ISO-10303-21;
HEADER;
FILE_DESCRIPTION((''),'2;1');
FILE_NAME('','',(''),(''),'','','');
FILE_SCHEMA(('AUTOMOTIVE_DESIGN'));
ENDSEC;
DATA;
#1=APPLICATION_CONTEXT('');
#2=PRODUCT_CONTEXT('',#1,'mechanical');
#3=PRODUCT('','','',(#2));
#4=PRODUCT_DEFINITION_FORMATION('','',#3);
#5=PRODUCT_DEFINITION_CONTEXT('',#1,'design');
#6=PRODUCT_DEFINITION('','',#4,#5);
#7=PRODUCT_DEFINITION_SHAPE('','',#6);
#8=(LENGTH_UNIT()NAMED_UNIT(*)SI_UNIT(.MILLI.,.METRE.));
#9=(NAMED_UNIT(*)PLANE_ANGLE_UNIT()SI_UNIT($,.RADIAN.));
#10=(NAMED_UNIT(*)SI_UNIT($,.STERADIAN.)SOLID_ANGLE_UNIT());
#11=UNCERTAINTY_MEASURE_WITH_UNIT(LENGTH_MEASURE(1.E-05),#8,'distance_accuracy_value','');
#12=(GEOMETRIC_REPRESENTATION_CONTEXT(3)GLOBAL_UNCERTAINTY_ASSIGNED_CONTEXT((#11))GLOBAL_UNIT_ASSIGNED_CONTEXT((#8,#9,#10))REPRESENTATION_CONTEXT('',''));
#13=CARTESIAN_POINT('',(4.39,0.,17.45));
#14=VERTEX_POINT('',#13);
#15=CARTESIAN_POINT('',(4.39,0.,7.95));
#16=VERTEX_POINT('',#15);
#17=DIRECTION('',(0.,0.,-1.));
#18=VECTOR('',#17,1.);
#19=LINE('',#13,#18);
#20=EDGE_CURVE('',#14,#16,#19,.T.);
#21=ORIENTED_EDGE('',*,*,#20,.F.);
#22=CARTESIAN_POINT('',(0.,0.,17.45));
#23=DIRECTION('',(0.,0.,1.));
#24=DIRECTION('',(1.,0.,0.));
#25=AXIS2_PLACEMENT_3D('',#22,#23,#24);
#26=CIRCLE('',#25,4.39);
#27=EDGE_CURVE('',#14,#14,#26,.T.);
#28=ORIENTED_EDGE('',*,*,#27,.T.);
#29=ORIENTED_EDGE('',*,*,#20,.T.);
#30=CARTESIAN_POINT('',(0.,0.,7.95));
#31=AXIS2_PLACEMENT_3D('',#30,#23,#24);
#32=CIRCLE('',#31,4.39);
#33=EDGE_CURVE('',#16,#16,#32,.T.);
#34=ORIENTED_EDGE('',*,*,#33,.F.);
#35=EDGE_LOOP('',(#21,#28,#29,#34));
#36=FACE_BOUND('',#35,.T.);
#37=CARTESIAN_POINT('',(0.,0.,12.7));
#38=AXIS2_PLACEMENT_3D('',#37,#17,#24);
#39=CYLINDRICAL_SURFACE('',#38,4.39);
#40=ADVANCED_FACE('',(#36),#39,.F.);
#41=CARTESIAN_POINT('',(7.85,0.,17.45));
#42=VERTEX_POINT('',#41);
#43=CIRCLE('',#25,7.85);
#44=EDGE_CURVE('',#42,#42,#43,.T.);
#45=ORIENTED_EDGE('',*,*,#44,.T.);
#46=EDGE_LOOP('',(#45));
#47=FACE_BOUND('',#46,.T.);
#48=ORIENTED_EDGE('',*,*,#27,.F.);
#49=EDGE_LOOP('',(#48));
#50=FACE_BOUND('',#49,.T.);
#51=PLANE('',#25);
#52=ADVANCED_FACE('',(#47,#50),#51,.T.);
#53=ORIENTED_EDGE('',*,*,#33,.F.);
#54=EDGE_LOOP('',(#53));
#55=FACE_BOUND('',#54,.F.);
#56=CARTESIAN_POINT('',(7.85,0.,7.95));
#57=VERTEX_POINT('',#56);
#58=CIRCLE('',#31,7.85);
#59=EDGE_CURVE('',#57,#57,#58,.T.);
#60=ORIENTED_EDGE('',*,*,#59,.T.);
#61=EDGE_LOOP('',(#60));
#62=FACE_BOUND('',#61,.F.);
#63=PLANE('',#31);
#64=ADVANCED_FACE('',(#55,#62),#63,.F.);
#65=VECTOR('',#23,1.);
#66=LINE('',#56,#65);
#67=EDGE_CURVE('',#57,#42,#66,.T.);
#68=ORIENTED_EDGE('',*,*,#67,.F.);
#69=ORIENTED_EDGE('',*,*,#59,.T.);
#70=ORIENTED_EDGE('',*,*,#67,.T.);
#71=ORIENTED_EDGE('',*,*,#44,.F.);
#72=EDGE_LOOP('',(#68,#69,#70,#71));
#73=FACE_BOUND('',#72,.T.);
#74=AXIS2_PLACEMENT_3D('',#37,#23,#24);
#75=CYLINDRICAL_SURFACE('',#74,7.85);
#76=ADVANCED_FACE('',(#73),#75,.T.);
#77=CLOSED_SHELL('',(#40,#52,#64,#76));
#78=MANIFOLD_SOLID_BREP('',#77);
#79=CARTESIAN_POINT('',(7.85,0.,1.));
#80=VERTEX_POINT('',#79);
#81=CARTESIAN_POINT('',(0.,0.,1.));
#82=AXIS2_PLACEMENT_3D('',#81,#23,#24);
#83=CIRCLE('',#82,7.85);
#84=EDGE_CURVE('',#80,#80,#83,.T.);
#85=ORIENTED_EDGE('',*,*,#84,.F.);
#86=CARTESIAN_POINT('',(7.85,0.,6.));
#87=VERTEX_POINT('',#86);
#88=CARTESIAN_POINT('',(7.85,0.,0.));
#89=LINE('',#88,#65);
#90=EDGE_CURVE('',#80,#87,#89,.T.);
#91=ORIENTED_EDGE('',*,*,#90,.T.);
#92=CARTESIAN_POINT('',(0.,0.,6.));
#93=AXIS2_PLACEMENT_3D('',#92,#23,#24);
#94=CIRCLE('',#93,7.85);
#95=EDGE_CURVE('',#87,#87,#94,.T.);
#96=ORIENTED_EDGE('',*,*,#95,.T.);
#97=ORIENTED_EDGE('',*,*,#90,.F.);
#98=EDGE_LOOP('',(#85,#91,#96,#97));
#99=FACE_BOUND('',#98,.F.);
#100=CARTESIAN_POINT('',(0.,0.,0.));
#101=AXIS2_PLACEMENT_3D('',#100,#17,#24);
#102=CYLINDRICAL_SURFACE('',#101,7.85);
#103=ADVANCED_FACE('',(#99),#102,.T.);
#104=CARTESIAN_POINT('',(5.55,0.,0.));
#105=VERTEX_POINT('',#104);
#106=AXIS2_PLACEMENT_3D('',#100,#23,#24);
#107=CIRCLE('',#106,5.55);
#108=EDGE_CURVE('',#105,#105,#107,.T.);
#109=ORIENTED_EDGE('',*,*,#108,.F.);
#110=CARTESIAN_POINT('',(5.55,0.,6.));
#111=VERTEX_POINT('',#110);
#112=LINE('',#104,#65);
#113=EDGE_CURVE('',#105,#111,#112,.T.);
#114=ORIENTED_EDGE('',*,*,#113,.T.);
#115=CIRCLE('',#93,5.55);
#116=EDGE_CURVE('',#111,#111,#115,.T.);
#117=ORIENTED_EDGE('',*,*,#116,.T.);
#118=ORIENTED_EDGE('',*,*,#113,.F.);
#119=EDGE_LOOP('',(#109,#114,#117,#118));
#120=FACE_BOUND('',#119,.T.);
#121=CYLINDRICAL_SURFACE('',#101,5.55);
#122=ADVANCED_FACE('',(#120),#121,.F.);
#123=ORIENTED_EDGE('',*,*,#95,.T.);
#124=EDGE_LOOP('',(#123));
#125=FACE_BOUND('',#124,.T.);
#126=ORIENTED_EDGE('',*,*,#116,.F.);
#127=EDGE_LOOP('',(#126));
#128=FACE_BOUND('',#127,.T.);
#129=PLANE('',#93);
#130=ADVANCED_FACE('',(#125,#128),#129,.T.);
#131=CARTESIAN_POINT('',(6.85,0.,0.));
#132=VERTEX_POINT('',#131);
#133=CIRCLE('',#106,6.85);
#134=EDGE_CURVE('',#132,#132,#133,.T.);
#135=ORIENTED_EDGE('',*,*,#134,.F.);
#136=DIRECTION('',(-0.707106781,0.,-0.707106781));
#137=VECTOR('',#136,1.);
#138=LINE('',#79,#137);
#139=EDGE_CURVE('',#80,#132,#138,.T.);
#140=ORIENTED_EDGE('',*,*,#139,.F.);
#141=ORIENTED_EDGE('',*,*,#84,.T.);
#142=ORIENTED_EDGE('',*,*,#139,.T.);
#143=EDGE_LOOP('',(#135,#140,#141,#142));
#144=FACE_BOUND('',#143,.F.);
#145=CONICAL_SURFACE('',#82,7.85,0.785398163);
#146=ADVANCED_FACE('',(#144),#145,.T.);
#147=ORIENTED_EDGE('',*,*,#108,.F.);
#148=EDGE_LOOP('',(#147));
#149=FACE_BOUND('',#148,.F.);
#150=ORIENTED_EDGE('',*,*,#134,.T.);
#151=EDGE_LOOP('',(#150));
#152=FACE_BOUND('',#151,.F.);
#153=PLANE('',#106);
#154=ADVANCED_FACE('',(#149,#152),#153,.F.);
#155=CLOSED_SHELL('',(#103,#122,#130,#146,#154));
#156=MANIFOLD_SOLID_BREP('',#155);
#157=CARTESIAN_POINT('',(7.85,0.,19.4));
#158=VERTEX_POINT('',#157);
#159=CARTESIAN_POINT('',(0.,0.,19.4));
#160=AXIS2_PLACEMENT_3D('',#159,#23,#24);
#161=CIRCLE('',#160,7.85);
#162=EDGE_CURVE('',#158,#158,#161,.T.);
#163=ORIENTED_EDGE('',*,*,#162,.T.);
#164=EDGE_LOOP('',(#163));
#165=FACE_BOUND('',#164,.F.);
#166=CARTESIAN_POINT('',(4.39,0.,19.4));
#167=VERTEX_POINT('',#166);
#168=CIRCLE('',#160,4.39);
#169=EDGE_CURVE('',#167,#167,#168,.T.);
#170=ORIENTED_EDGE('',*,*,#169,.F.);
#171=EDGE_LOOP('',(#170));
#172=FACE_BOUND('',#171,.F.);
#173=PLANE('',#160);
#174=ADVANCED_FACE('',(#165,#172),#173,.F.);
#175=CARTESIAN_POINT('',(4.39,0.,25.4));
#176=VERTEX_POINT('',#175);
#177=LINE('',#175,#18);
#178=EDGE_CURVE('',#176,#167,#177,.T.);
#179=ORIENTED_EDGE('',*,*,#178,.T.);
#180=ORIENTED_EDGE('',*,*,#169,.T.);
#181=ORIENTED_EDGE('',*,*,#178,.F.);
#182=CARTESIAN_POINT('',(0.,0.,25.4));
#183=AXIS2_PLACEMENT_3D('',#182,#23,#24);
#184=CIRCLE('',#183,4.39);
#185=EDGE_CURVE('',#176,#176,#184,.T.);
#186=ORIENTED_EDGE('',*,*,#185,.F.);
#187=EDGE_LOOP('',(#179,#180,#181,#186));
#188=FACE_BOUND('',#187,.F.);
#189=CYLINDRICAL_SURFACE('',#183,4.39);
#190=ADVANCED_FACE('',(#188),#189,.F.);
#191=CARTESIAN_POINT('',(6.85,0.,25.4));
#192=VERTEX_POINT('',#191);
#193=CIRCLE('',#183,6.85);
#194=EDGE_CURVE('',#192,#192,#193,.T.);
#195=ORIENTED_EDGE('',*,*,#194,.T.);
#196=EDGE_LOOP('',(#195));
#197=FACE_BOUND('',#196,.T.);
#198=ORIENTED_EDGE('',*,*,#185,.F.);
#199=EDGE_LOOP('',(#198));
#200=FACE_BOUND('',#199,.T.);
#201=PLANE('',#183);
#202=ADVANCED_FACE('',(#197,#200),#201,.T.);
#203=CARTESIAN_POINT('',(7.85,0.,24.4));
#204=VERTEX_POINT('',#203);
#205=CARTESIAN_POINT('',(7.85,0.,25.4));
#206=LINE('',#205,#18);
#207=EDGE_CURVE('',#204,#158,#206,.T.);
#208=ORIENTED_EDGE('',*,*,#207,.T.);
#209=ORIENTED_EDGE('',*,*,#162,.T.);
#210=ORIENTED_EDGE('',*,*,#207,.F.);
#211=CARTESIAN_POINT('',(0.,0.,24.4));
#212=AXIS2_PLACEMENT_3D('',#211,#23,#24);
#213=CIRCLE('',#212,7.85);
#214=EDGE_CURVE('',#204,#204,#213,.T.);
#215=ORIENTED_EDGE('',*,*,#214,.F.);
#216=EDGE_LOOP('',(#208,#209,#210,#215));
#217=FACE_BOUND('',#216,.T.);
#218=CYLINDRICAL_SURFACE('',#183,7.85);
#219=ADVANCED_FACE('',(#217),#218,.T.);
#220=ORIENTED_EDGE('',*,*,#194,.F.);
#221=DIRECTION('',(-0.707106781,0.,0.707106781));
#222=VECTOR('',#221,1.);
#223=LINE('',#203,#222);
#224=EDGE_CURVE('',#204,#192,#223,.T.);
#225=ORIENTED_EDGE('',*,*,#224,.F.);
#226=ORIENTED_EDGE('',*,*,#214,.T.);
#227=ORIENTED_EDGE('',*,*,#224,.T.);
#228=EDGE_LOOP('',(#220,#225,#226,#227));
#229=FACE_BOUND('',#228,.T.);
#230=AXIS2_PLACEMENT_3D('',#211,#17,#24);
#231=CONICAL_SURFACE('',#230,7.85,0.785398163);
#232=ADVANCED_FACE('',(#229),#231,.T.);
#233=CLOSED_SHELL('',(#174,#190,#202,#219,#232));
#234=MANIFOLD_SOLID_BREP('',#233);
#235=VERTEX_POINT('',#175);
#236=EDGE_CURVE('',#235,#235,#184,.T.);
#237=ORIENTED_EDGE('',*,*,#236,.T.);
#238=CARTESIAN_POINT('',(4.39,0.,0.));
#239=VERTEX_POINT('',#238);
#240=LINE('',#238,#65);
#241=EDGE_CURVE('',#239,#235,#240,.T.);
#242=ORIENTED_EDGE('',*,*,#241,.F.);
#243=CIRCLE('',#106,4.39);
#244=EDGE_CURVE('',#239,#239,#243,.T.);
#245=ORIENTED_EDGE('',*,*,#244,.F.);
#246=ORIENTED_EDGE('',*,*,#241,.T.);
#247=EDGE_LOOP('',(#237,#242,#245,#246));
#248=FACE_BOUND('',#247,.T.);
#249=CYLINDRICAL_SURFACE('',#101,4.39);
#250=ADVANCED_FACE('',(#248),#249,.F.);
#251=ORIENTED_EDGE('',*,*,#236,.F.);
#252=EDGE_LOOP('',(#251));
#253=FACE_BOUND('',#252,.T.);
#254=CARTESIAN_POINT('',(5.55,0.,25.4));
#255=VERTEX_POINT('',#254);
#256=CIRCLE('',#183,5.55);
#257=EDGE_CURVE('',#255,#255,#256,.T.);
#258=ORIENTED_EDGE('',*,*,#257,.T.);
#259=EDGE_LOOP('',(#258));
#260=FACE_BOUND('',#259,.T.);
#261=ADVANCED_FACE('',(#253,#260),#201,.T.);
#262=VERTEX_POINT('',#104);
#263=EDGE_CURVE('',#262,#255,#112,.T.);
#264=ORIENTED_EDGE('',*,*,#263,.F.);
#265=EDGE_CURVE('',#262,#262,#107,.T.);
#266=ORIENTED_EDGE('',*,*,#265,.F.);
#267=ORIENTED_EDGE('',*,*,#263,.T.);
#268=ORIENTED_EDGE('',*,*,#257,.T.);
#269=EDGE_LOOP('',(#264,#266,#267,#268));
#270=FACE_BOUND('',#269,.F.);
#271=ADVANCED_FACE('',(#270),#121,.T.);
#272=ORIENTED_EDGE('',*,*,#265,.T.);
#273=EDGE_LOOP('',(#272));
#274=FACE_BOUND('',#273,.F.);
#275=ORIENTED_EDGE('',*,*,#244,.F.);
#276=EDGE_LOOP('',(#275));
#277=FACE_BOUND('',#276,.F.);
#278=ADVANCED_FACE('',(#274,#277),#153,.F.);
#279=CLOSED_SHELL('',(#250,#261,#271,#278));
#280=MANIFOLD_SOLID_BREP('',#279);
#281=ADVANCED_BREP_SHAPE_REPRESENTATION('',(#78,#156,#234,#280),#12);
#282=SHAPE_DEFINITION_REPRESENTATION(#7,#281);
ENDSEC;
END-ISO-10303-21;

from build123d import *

# Parameters (mm, degrees)
F0_R      = 7.85
F0_R_2    = 5.55
F1_DEPTH  = 6
F2_SIZE   = 1
F5_R      = 7.85
F5_R_2    = 4.39
F6_DEPTH  = 6
F7_SIZE   = 1
F0_R_3    = 4.39
F8_DEPTH  = 25.4
F10_R     = 7.85
F10_R_2   = 4.39
F11_DEPTH = 4.75


# Not quite as in the source:
# - the program builds the solid bodies; features that only make, move or delete a surface that nothing else refers to are left out


with BuildPart() as f1:
    # F0 (on Top) → F1 (new body)
    with BuildSketch(Plane.XY):
        Circle(F0_R)
        Circle(F0_R_2, mode=Mode.SUBTRACT)
    extrude(amount=F1_DEPTH)

    # F2
    f2_edges = [f1.edges().sort_by_distance(p)[0] for p in [
        (-7.85, 0, 0),
    ]]
    chamfer(f2_edges, length=F2_SIZE)


with BuildPart() as f6:
    # F5 (on offset) → F6 (new body)
    with BuildSketch(Plane.XY.offset(25.4)):
        Circle(F5_R)
        Circle(F5_R_2, mode=Mode.SUBTRACT)
    extrude(amount=-F6_DEPTH)

    # F7
    f7_edges = [f6.edges().sort_by_distance(p)[0] for p in [
        (-7.85, 0, 25.4),
    ]]
    chamfer(f7_edges, length=F7_SIZE)


with BuildPart() as f8:
    # F0 (on Top) → F8 (new body)
    with BuildSketch(Plane.XY):
        Circle(F0_R_2)
        Circle(F0_R_3, mode=Mode.SUBTRACT)
    extrude(amount=F8_DEPTH)


with BuildPart() as f11:
    # F10 (on offset) → F11 (new body, symmetric)
    with BuildSketch(Plane.XY.offset(12.7)):
        Circle(F10_R)
        Circle(F10_R_2, mode=Mode.SUBTRACT)
    extrude(amount=F11_DEPTH, both=True)


solid = Compound([f1.part, f6.part, f8.part, f11.part])
